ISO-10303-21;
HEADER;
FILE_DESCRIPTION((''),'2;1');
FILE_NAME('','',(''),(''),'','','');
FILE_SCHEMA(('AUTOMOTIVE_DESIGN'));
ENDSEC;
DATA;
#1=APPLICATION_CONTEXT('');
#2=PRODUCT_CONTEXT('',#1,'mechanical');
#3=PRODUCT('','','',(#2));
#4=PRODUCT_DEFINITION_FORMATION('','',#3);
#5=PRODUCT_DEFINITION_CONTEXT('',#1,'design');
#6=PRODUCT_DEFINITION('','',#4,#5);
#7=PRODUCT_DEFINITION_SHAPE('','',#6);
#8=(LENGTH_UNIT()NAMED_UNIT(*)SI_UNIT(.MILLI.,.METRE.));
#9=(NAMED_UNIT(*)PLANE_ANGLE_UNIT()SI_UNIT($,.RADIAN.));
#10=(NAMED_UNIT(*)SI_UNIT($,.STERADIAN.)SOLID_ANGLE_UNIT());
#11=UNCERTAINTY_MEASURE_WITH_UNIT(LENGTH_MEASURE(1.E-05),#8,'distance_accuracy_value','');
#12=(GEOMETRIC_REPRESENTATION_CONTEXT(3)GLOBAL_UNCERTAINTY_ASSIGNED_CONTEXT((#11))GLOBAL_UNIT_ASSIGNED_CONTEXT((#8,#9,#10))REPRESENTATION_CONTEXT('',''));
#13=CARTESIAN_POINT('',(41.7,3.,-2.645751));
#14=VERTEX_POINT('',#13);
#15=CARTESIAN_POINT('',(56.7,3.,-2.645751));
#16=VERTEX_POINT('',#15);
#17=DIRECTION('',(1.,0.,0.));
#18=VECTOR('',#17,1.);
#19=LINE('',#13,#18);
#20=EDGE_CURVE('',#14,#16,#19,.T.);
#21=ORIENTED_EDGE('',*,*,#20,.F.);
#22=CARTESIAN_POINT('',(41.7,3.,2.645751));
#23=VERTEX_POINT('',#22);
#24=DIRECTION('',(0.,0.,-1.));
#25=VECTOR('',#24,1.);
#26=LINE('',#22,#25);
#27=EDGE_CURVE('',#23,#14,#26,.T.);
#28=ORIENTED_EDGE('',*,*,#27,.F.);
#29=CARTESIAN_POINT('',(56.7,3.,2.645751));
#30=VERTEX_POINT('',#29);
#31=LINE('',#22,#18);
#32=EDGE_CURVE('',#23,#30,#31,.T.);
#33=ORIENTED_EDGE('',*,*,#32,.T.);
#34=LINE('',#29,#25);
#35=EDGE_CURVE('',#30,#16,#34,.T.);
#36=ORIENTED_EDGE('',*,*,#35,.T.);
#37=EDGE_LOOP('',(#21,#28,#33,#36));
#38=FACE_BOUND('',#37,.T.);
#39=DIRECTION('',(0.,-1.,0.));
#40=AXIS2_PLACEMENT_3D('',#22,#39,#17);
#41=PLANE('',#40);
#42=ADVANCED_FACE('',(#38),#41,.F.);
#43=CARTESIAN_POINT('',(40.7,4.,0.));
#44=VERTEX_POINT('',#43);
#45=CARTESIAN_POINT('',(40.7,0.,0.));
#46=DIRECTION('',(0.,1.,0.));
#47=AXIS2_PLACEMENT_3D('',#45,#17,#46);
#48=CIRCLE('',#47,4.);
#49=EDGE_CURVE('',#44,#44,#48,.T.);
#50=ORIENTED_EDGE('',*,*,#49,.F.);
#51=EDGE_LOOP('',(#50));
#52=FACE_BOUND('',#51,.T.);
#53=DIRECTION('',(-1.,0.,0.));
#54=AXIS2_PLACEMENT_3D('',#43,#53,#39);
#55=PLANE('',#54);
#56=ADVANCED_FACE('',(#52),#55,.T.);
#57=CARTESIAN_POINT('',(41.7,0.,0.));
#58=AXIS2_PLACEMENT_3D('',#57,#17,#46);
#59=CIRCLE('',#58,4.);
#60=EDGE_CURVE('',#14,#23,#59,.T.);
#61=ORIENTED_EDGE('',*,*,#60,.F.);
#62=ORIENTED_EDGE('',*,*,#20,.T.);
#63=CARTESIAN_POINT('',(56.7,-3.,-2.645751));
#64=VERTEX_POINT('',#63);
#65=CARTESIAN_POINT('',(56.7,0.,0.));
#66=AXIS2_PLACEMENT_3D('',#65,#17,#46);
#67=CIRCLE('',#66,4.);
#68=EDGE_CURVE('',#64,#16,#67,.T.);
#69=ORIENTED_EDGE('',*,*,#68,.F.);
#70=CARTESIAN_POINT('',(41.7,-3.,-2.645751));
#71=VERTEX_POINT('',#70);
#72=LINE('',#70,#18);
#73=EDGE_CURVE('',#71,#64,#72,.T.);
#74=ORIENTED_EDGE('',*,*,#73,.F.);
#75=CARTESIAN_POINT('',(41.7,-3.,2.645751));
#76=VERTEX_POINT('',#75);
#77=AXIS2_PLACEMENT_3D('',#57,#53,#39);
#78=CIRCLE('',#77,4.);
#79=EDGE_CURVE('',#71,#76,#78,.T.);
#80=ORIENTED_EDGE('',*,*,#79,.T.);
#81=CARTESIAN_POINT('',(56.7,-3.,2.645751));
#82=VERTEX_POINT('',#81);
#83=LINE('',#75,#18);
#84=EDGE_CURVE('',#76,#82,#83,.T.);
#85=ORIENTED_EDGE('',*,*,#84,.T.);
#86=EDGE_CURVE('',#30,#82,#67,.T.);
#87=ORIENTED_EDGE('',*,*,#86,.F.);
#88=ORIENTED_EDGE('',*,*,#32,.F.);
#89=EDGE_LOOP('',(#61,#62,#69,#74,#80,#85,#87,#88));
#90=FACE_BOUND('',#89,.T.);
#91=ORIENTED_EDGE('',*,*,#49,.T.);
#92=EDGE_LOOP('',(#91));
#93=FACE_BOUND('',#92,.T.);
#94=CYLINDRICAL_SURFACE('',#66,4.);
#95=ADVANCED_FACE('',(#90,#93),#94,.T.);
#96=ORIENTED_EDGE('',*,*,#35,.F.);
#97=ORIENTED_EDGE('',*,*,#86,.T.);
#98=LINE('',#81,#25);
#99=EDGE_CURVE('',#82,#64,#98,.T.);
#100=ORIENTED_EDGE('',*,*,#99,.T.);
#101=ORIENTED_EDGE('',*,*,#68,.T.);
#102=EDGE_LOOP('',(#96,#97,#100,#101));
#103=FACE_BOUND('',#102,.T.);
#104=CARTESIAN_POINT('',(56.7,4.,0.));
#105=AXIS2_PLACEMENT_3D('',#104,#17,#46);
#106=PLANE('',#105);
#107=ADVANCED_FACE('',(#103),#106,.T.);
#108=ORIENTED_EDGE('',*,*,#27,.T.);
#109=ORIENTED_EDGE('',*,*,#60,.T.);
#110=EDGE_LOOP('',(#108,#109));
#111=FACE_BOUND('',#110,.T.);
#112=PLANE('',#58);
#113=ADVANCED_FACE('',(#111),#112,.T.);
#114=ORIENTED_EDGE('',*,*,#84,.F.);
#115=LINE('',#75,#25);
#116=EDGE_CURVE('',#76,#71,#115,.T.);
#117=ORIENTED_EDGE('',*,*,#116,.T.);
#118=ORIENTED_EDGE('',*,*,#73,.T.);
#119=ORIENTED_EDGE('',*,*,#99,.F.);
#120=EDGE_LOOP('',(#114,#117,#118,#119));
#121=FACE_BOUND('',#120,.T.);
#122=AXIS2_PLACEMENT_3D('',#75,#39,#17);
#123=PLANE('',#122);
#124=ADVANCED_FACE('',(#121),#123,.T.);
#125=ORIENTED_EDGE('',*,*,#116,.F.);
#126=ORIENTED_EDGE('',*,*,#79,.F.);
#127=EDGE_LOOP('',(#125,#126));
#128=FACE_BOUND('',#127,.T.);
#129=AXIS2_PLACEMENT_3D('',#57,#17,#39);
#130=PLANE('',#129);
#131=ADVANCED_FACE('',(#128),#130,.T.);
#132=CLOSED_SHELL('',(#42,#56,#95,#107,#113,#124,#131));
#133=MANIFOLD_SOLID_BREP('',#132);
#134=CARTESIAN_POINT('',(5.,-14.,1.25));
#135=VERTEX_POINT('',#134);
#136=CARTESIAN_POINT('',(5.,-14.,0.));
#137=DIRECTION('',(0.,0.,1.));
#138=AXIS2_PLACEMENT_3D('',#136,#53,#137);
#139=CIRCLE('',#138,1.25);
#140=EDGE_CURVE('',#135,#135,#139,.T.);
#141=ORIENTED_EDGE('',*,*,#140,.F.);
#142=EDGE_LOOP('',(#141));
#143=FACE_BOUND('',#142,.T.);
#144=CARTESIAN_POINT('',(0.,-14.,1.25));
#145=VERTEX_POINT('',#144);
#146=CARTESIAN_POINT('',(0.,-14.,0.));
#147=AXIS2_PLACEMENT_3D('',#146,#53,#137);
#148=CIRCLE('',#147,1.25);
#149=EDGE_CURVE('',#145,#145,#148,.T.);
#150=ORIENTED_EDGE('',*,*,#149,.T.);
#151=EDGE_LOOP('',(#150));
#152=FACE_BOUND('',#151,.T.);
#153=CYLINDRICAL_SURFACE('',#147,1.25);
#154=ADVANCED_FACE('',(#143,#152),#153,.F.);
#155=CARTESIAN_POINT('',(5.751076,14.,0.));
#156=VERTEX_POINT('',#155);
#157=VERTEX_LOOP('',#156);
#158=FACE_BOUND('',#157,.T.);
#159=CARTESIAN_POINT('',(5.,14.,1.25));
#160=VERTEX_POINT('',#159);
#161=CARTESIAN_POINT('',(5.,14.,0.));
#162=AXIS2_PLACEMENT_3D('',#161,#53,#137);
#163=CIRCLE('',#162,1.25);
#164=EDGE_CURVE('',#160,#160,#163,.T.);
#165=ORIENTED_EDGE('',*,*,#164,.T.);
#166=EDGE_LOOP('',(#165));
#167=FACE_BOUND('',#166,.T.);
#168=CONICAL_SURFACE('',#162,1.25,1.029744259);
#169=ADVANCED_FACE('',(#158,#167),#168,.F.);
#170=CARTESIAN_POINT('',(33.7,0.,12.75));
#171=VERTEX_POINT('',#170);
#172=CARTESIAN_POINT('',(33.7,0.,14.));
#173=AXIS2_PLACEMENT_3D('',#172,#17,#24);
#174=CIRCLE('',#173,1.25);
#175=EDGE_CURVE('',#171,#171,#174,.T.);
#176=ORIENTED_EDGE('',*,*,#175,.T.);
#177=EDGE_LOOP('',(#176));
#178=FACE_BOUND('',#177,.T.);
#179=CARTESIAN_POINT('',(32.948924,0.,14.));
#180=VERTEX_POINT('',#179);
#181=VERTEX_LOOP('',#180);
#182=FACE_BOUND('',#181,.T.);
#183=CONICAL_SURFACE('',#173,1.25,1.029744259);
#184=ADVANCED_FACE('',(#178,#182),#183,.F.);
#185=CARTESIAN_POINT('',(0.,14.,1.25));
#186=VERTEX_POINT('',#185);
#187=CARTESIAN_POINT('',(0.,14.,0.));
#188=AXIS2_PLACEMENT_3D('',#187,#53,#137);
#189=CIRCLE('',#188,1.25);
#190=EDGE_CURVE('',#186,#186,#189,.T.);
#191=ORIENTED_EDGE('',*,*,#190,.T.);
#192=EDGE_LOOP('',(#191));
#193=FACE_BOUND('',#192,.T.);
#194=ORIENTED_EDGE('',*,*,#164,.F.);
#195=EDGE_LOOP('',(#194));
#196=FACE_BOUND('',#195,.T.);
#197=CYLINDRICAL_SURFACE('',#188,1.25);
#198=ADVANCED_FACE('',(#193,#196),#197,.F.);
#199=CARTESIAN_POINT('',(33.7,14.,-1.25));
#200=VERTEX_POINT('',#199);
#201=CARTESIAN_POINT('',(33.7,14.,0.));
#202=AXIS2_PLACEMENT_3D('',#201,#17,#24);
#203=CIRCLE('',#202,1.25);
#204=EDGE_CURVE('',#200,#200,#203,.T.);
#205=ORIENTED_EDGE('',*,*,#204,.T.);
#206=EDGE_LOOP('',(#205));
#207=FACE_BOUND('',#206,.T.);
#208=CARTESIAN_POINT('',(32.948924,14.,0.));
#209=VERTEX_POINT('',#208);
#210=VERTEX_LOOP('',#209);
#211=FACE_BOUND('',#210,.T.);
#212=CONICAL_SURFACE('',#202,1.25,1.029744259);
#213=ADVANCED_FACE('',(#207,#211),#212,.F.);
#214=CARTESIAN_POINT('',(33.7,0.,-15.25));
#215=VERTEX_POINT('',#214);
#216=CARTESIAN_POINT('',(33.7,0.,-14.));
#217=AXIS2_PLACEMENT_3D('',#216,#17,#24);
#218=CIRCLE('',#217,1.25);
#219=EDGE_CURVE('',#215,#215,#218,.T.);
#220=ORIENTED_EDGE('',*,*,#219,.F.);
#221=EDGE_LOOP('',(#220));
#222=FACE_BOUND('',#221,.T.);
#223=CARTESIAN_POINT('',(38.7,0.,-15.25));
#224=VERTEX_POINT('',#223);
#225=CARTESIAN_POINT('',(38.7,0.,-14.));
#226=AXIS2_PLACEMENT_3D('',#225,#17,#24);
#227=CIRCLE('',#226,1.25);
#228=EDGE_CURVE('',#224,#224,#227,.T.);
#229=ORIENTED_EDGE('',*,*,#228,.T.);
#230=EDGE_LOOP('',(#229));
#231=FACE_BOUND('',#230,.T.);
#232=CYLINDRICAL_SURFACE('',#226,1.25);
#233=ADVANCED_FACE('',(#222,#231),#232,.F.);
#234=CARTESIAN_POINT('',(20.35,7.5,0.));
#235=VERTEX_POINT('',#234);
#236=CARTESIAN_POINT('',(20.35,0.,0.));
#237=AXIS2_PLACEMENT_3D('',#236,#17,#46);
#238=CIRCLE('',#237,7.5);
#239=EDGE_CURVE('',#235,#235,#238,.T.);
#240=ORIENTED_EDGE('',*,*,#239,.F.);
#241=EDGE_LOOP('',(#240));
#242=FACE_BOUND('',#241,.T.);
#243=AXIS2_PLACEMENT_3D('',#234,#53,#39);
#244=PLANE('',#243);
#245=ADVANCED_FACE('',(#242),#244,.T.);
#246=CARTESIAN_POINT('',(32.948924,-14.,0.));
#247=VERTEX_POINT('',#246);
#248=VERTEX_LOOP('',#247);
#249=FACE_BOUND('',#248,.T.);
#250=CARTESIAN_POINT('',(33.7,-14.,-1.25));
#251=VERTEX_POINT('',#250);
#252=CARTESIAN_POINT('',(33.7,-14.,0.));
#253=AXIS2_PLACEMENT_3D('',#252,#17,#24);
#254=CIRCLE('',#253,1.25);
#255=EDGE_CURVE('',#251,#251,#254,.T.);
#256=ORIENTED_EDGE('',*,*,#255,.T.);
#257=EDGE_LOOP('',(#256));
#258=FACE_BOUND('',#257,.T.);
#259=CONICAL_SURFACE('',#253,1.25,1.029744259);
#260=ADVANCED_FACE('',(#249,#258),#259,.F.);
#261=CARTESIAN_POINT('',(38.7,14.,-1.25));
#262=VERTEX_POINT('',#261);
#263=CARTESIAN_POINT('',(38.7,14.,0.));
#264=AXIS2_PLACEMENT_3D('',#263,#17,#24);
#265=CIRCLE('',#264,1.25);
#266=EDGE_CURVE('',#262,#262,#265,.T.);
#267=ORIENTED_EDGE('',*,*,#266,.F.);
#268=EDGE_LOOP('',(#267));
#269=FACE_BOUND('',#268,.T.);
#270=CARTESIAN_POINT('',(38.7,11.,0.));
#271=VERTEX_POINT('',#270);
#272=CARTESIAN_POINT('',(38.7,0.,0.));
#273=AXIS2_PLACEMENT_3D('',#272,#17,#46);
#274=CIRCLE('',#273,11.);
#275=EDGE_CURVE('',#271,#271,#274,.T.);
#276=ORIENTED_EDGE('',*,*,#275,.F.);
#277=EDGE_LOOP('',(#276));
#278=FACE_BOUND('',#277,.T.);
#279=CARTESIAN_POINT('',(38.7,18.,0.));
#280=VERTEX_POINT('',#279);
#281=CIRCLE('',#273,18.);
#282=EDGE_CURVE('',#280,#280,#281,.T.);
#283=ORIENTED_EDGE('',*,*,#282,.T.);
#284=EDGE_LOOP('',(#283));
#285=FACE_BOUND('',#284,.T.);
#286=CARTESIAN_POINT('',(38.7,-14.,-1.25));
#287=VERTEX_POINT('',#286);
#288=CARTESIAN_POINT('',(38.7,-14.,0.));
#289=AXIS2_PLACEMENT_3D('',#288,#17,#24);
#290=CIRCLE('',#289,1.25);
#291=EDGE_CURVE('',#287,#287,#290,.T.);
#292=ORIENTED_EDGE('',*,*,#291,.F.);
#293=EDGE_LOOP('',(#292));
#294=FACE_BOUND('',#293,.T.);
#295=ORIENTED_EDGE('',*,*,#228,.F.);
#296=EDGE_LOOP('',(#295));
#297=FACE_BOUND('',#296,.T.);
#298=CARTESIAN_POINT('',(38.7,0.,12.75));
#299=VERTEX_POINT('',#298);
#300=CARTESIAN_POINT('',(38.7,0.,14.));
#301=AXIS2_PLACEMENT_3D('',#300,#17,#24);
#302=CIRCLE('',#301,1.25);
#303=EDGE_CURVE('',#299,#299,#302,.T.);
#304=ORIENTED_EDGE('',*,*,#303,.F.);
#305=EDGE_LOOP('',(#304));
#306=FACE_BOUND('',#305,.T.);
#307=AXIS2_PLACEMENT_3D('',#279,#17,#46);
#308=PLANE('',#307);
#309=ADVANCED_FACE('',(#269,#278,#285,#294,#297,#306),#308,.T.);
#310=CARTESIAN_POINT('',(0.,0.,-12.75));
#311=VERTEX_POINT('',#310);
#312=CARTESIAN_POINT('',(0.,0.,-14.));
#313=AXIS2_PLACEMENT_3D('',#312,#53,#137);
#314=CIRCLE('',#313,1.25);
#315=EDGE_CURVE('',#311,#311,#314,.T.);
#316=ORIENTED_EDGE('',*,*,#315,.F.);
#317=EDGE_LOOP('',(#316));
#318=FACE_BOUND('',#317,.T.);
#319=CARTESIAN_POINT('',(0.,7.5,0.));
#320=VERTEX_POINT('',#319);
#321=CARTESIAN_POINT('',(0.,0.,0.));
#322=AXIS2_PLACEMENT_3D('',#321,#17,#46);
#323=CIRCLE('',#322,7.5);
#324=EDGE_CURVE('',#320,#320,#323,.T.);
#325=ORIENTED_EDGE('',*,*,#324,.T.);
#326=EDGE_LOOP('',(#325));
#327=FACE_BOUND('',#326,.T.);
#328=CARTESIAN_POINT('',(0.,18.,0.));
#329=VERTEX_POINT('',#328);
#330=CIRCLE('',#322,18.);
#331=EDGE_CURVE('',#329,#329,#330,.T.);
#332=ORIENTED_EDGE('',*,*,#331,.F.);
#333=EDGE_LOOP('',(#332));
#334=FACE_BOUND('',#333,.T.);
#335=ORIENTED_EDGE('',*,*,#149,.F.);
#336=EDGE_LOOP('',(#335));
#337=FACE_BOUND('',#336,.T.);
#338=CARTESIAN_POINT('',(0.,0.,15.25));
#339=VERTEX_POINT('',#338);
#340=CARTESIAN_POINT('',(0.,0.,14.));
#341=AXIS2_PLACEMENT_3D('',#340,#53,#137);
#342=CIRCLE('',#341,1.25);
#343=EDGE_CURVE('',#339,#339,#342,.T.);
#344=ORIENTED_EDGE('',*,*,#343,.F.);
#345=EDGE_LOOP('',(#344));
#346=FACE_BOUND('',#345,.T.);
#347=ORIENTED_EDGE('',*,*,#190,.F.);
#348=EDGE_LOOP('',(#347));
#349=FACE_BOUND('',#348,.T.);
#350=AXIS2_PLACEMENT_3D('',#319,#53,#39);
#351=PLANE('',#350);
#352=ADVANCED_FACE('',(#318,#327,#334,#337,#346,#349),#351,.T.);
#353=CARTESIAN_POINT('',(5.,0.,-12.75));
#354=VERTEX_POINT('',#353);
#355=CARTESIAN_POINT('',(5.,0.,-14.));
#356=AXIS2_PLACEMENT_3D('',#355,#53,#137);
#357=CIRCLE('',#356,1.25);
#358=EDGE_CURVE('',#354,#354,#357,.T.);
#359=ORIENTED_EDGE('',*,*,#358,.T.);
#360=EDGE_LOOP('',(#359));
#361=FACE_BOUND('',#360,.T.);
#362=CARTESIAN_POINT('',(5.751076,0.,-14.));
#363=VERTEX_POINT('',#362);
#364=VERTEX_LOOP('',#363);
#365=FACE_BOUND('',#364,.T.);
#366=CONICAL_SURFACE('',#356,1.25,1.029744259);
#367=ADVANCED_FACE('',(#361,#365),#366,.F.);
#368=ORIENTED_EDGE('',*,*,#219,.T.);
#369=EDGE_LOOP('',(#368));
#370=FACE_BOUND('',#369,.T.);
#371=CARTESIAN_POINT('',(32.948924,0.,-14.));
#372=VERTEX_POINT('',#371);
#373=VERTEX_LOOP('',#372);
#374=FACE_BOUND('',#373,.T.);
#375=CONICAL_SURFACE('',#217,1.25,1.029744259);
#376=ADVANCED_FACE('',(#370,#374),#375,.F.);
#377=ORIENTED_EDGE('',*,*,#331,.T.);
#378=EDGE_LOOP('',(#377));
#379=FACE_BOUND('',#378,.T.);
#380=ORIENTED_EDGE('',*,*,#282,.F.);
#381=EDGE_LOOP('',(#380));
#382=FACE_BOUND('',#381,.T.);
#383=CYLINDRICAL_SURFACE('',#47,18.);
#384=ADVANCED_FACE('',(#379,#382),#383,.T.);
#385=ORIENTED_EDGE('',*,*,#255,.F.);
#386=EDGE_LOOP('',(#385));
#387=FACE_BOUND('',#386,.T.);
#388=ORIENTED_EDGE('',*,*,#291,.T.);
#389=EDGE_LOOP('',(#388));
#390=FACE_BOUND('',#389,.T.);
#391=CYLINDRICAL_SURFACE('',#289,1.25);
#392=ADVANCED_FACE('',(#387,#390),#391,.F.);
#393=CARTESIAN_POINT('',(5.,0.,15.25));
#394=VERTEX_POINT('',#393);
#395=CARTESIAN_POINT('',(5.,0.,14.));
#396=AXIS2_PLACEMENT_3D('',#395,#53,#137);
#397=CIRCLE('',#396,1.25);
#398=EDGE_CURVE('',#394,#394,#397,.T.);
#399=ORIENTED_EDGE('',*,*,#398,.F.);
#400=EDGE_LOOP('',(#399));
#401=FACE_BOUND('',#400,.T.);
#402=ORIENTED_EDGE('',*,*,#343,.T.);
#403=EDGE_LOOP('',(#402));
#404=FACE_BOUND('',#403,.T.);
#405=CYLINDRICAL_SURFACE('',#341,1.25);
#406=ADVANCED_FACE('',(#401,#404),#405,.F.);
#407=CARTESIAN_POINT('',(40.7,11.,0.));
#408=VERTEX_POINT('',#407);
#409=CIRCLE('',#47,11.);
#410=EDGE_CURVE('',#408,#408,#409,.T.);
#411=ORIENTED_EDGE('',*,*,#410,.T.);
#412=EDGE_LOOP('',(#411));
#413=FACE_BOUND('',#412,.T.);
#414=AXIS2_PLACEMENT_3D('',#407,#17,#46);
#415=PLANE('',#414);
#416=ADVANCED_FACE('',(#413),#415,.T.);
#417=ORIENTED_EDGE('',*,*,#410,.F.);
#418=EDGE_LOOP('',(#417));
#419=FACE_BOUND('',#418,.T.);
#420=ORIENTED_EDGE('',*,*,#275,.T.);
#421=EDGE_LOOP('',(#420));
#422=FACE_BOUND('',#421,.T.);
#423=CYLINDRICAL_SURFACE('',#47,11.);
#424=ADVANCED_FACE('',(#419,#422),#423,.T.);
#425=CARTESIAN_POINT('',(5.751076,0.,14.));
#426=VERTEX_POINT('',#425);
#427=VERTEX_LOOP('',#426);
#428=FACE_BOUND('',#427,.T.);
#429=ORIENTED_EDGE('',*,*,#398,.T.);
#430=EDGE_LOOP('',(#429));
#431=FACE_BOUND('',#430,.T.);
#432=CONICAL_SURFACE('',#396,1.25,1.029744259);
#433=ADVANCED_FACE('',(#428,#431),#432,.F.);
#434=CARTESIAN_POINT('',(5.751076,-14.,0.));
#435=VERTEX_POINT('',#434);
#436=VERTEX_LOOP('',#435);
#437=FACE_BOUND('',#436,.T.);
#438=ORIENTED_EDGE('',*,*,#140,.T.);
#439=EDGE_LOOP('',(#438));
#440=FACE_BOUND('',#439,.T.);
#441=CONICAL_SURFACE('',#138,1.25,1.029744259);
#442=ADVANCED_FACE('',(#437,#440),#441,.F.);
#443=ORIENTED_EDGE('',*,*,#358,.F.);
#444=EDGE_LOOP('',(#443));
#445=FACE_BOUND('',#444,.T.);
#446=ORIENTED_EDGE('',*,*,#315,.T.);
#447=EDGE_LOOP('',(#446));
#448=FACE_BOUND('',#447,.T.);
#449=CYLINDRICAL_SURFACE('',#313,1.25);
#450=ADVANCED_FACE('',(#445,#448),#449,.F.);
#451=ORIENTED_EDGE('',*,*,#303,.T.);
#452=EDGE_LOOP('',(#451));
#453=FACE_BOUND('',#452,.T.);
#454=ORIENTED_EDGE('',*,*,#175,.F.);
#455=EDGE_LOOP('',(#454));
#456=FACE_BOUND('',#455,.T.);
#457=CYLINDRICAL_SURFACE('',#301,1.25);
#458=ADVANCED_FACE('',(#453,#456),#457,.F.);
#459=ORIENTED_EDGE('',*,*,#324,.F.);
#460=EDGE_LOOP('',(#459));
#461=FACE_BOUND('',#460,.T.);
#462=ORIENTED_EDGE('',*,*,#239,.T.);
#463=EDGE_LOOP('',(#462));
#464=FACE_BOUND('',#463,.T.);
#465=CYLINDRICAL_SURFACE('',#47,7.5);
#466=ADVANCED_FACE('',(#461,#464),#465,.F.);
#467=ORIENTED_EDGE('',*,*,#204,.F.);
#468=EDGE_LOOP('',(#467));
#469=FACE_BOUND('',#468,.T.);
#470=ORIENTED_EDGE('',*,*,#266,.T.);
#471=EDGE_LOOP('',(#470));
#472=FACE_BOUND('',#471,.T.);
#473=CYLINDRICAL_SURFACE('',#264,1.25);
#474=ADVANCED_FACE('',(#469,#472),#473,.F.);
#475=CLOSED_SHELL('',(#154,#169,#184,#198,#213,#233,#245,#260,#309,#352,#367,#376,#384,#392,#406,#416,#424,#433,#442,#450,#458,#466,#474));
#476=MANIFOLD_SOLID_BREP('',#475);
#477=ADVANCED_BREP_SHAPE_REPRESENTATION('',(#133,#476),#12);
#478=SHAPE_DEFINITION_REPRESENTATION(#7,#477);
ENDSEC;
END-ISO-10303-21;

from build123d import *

# Parameters (mm, degrees)
SKIZZE3_W                       = 16
SKIZZE3_H                       = 4
SCHNITT_LINEAR_AUSTRAGEN1_DEPTH = 15
SPIEGELN1_START                 = 41.7
SPIEGELN1_DEPTH                 = 15
KREISMUSTER1_COUNT              = 4


# Read off the part's stored shape, not the designer's step: Spiegeln1
with BuildPart() as part:
    # Skizze2 → Rotation1 (revolve)
    with BuildSketch(Plane.XY):
        Polygon((38.7, 18), (38.7, 11), (40.7, 11), (40.7, 0), (20.35, 0), (20.35, 7.5), (0, 7.5), (0, 18), align=None)
    revolve(axis=Axis((40.7, 0, 0), (-1, 0, 0)))

    # Skizze6 → M3 Gewindebohrung1 (revolve, cut)
    with BuildSketch(Plane.ZX.offset(14)):
        Polygon((0, 0), (0, 5.751075774), (1.25, 5), (1.25, 0), align=None)
    m3_gewindebohrung1 = revolve(axis=Axis((-6.35, 14, 0), (1, 0, 0)), mode=Mode.SUBTRACT)

    # Skizze8 → M3 Gewindebohrung2 (revolve, cut)
    with BuildSketch(Plane(origin=(38.7, 14, 0), x_dir=(0, 0, -1), z_dir=(0, 1, 0))):
        Polygon((0, 0), (0, 5.751075774), (1.25, 5), (1.25, 0), align=None)
    m3_gewindebohrung2 = revolve(axis=Axis((45.05, 14, 0), (-1, 0, 0)), mode=Mode.SUBTRACT)

    # Kreismuster1: M3 Gewindebohrung1, M3 Gewindebohrung2 ×4 about axis
    kreismuster1_axis = Axis((0, 0, 0), (1, 0, 0))
    add([m3_gewindebohrung1.rotate(kreismuster1_axis, i * 360 / KREISMUSTER1_COUNT) for i in range(1, KREISMUSTER1_COUNT)], mode=Mode.SUBTRACT)
    add([m3_gewindebohrung2.rotate(kreismuster1_axis, i * 360 / KREISMUSTER1_COUNT) for i in range(1, KREISMUSTER1_COUNT)], mode=Mode.SUBTRACT)


with BuildPart() as body_2:
    # Skizze3 → Rotation2 (revolve)
    with BuildSketch(Plane.XY):
        with Locations((48.7, 2)):
            Rectangle(SKIZZE3_W, SKIZZE3_H)
    revolve(axis=Axis((56.7, 0, 0), (-1, 0, 0)))

    # Skizze4 → Schnitt-Linear austragen1 (cut)
    with BuildSketch(Plane(origin=(56.7, 0, 0), x_dir=(0, 0, -1), z_dir=(1, 0, 0))):
        with BuildLine():
            Line((-2.645751311, 3), (0, 3))
            Line((0, 3), (0, 4))
            ThreePointArc((0, 4), (-1.414213562, 3.741657387), (-2.645751311, 3))
        make_face()
    extrude(amount=-SCHNITT_LINEAR_AUSTRAGEN1_DEPTH, mode=Mode.SUBTRACT)

    # Spiegeln1 outline → Spiegeln1 (cut)
    with BuildSketch(Plane.YZ.offset(SPIEGELN1_START)):
        with BuildLine():
            Line((4, 0), (3, 0))
            Line((3, 0), (3, -2.645751311))
            ThreePointArc((3, -2.645751311), (3.741657387, -1.414213562), (4, 0))
        make_face()
        with BuildLine():
            Line((-3, -2.645751311), (-3, 2.645751311))
            ThreePointArc((-3, 2.645751311), (-4, 0), (-3, -2.645751311))
        make_face()
    extrude(amount=SPIEGELN1_DEPTH, mode=Mode.SUBTRACT)


solid = Compound([part.part, body_2.part])
